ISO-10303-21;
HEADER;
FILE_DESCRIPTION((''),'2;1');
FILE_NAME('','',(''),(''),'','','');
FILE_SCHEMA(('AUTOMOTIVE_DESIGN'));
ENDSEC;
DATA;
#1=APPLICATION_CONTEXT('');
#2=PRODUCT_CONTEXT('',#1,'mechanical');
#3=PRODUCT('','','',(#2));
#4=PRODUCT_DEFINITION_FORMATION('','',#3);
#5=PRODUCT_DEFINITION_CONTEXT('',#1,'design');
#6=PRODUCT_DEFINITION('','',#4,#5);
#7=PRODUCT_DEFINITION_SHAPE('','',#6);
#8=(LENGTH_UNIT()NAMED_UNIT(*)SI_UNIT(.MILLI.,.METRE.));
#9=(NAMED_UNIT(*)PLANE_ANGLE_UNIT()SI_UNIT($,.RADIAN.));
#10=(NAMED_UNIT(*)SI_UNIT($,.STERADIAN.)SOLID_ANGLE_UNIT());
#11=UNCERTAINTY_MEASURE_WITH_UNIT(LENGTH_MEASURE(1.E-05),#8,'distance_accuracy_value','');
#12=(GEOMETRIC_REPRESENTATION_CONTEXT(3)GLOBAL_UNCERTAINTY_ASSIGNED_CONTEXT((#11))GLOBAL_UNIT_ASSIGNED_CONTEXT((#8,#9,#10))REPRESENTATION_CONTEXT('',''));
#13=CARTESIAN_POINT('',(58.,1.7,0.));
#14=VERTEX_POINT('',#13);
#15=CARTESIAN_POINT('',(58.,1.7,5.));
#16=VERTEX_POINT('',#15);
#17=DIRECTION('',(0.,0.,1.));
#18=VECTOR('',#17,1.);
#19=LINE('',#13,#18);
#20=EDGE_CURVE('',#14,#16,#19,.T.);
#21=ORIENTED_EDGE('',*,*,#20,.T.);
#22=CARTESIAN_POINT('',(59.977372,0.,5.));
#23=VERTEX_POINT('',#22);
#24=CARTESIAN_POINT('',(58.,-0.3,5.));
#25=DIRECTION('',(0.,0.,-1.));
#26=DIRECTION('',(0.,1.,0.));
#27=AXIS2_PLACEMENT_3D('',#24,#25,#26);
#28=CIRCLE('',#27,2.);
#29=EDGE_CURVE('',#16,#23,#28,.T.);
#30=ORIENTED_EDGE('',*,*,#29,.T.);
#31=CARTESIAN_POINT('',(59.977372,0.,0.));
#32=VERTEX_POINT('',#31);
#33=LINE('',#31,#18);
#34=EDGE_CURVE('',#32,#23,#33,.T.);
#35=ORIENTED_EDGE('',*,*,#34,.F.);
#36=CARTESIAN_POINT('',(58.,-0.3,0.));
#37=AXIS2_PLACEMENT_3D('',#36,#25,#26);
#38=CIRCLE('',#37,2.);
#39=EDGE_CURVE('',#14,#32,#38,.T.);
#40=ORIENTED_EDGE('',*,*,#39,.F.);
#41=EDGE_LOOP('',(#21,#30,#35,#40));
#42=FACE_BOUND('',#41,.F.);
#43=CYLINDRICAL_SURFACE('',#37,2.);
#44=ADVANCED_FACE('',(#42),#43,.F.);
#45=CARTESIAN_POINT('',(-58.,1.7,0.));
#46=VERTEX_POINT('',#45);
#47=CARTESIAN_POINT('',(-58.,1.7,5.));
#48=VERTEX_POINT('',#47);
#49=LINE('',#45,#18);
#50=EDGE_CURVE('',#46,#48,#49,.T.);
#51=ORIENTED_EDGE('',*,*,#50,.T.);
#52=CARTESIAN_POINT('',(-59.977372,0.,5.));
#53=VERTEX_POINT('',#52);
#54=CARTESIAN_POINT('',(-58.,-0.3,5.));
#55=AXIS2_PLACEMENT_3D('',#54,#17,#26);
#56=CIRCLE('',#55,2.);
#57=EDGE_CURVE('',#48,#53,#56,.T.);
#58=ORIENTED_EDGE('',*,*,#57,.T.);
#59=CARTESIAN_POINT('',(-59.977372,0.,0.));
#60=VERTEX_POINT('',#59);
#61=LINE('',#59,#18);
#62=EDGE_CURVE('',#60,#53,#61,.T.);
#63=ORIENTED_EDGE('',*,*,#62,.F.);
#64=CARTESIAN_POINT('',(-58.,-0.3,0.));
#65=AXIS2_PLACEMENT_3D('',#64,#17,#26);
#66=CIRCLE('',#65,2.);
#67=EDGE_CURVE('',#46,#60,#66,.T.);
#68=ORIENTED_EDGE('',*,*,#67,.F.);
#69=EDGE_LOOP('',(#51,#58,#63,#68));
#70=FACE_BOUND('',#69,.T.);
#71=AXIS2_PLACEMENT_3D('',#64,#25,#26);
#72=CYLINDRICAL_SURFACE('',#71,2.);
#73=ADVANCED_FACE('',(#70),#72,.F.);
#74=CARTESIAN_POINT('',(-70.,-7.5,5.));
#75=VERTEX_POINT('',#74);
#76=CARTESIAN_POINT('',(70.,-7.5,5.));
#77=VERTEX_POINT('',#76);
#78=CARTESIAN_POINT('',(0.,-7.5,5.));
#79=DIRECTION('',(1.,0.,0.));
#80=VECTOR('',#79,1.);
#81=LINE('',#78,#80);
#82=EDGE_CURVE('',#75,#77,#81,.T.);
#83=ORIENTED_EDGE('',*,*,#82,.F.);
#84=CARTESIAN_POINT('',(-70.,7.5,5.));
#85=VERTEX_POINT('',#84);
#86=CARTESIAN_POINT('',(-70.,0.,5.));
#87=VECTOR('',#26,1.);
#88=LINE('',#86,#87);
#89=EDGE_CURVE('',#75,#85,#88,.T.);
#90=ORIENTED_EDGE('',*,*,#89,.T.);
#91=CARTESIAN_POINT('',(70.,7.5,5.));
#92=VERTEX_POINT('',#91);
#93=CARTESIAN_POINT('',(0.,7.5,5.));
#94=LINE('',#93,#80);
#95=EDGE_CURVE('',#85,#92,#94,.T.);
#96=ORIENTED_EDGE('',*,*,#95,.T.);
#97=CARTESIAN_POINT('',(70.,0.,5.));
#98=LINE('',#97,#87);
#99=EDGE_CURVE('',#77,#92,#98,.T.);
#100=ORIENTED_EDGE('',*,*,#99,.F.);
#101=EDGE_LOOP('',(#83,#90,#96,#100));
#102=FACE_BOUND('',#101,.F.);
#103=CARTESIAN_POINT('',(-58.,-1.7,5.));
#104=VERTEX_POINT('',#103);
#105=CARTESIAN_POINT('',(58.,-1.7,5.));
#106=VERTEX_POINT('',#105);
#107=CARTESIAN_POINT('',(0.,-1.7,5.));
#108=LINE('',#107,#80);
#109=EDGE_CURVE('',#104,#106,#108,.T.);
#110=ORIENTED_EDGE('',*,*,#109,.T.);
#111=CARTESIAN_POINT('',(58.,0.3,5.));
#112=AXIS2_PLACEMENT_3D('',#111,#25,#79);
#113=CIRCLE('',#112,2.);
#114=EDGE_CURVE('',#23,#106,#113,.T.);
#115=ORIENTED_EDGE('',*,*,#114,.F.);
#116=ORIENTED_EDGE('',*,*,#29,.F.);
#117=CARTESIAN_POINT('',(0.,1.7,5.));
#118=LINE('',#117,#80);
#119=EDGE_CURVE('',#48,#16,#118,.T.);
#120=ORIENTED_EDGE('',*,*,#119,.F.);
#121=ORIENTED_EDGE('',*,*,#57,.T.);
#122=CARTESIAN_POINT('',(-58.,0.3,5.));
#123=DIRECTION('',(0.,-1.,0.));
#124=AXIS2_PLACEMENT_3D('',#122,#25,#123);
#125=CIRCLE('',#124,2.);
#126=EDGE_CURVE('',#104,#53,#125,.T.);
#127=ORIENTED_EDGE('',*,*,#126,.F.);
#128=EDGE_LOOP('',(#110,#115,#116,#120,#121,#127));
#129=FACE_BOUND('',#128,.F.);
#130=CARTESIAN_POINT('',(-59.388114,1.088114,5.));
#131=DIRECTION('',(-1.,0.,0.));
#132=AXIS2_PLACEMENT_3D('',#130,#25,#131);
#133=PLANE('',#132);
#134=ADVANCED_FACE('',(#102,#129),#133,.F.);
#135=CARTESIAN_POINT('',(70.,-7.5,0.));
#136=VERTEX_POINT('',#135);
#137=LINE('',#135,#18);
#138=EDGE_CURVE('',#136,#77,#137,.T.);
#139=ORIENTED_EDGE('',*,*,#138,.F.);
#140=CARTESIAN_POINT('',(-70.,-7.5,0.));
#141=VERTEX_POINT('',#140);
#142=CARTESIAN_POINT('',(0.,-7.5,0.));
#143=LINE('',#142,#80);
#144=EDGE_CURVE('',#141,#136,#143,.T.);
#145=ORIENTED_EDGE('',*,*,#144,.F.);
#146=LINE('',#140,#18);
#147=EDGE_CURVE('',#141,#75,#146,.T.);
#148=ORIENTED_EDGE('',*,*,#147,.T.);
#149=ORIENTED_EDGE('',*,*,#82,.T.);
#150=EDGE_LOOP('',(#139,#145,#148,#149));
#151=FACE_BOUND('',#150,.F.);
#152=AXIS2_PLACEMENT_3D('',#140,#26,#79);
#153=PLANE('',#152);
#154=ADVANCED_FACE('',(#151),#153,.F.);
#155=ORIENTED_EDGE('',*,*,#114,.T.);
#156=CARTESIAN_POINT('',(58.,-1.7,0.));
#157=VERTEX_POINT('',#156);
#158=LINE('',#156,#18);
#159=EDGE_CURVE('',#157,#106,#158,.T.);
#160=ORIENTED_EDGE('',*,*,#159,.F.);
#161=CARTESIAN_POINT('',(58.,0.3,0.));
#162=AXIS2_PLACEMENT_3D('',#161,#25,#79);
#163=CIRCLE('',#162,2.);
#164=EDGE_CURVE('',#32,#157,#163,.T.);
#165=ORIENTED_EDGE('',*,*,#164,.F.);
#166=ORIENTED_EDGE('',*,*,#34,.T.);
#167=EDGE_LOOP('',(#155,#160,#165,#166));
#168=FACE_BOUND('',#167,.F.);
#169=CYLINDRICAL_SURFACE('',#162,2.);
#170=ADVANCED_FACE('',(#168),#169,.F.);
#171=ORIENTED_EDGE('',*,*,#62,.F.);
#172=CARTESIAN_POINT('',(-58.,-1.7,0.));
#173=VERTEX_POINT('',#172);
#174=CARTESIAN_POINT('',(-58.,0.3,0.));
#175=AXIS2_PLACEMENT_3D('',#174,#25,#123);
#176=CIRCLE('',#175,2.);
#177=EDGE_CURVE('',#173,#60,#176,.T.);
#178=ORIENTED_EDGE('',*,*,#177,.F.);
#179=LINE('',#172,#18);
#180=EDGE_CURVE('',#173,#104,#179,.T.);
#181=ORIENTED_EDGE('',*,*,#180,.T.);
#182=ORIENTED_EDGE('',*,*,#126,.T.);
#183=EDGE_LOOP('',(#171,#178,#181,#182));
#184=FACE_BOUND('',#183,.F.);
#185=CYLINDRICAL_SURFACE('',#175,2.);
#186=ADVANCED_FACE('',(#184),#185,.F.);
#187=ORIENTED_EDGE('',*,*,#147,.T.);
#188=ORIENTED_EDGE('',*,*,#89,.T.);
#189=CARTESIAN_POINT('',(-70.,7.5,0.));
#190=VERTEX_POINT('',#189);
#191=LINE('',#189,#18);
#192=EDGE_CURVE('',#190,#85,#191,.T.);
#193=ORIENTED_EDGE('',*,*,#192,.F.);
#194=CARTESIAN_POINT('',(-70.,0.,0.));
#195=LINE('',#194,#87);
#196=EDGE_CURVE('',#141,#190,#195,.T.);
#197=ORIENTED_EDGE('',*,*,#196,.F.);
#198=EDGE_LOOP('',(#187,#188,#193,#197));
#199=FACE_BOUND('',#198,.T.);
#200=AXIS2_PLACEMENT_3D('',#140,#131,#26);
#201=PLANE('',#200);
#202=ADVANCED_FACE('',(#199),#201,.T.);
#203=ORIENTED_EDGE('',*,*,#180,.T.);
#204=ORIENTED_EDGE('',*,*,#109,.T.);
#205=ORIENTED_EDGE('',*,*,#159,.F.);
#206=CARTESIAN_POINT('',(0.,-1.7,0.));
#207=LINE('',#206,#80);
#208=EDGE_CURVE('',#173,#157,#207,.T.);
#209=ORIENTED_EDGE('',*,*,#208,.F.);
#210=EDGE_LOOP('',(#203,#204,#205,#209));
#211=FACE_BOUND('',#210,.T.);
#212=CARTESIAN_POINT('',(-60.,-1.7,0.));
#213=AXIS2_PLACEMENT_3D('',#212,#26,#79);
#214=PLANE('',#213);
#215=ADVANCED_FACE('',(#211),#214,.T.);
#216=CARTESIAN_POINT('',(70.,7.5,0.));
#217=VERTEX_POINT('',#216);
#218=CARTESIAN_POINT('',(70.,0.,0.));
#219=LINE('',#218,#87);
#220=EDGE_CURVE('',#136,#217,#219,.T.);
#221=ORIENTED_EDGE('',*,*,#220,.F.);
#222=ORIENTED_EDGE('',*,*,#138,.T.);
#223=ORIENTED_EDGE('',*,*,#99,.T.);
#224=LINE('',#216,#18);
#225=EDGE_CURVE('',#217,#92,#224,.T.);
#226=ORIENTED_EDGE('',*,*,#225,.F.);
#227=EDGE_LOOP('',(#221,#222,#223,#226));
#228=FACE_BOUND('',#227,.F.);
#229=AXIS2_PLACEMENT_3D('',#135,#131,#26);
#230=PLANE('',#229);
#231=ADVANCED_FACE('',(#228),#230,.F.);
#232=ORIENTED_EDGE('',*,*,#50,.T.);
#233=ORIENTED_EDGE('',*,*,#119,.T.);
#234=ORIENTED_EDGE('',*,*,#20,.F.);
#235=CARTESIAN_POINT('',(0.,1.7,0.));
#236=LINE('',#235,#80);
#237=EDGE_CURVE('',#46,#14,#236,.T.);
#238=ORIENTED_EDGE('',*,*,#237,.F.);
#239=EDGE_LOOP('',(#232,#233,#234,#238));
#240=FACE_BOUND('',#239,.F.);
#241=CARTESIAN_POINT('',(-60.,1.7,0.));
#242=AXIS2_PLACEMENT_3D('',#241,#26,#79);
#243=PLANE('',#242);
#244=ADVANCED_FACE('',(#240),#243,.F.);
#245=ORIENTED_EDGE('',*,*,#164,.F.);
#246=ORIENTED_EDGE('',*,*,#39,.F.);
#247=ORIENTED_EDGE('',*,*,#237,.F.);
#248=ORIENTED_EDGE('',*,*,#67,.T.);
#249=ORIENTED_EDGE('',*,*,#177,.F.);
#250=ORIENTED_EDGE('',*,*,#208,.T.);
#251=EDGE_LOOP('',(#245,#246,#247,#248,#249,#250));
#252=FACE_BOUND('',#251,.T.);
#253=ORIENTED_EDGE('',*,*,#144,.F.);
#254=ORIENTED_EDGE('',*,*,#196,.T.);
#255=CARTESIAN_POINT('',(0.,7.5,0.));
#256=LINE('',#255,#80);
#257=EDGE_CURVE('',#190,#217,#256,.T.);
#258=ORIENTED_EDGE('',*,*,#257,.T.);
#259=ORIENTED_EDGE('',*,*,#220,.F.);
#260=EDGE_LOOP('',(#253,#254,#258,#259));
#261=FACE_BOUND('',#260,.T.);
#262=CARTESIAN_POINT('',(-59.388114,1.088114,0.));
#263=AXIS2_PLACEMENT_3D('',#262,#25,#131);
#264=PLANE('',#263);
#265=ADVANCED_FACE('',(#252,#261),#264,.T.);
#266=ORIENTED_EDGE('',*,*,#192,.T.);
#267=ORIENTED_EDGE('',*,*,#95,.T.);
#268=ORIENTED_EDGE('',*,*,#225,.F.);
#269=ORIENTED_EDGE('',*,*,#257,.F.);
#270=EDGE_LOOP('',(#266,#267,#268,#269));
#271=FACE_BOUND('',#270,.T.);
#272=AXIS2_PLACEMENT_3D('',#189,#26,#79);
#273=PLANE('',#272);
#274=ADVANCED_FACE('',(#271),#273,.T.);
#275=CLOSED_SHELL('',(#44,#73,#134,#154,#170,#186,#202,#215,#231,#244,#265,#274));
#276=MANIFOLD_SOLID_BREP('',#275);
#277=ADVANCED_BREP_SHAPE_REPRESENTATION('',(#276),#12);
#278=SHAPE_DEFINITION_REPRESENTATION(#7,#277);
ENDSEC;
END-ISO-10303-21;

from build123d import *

# Parameters (mm, degrees)
F0_W        = 140
F0_H        = 15
F0_W_2      = 120
F0_H_2      = 3.4
F1_DEPTH    = 5
F2_T1_DEPTH = 5


# Not quite as in the source:
# - a fillet or chamfer that OpenCascade refuses, or shapes differently, is made with other operations: its cross-section is extruded or revolved along the edge and cut away or added


with BuildPart() as f1:
    # F0 (on Top) → F1 (new body)
    with BuildSketch(Plane.XY):
        Rectangle(F0_W, F0_H)
        Rectangle(F0_W_2, F0_H_2, mode=Mode.SUBTRACT)
    extrude(amount=F1_DEPTH)

    # F2: fillet of radius 2 on 4 edges, made by hand

    # F2_s2 → F2_t1 (join)
    with BuildSketch(Plane.XY):
        with BuildLine():
            ThreePointArc((-58, 1.7), (-59.4142135624, 1.1142135624), (-60, -0.3))
            Line((-60, -0.3), (-60, 1.7))
            Line((-60, 1.7), (-58, 1.7))
        make_face()
        with BuildLine():
            ThreePointArc((-58, -1.7), (-59.4142135624, -1.1142135624), (-60, 0.3))
            Line((-60, 0.3), (-60, -1.7))
            Line((-60, -1.7), (-58, -1.7))
        make_face()
        with BuildLine():
            ThreePointArc((58, 1.7), (59.4142135624, 1.1142135624), (60, -0.3))
            Line((60, -0.3), (60, 1.7))
            Line((60, 1.7), (58, 1.7))
        make_face()
        with BuildLine():
            ThreePointArc((60, 0.3), (59.4142135624, -1.1142135624), (58, -1.7))
            Line((58, -1.7), (60, -1.7))
            Line((60, -1.7), (60, 0.3))
        make_face()
    extrude(amount=F2_T1_DEPTH)


solid = f1.part
